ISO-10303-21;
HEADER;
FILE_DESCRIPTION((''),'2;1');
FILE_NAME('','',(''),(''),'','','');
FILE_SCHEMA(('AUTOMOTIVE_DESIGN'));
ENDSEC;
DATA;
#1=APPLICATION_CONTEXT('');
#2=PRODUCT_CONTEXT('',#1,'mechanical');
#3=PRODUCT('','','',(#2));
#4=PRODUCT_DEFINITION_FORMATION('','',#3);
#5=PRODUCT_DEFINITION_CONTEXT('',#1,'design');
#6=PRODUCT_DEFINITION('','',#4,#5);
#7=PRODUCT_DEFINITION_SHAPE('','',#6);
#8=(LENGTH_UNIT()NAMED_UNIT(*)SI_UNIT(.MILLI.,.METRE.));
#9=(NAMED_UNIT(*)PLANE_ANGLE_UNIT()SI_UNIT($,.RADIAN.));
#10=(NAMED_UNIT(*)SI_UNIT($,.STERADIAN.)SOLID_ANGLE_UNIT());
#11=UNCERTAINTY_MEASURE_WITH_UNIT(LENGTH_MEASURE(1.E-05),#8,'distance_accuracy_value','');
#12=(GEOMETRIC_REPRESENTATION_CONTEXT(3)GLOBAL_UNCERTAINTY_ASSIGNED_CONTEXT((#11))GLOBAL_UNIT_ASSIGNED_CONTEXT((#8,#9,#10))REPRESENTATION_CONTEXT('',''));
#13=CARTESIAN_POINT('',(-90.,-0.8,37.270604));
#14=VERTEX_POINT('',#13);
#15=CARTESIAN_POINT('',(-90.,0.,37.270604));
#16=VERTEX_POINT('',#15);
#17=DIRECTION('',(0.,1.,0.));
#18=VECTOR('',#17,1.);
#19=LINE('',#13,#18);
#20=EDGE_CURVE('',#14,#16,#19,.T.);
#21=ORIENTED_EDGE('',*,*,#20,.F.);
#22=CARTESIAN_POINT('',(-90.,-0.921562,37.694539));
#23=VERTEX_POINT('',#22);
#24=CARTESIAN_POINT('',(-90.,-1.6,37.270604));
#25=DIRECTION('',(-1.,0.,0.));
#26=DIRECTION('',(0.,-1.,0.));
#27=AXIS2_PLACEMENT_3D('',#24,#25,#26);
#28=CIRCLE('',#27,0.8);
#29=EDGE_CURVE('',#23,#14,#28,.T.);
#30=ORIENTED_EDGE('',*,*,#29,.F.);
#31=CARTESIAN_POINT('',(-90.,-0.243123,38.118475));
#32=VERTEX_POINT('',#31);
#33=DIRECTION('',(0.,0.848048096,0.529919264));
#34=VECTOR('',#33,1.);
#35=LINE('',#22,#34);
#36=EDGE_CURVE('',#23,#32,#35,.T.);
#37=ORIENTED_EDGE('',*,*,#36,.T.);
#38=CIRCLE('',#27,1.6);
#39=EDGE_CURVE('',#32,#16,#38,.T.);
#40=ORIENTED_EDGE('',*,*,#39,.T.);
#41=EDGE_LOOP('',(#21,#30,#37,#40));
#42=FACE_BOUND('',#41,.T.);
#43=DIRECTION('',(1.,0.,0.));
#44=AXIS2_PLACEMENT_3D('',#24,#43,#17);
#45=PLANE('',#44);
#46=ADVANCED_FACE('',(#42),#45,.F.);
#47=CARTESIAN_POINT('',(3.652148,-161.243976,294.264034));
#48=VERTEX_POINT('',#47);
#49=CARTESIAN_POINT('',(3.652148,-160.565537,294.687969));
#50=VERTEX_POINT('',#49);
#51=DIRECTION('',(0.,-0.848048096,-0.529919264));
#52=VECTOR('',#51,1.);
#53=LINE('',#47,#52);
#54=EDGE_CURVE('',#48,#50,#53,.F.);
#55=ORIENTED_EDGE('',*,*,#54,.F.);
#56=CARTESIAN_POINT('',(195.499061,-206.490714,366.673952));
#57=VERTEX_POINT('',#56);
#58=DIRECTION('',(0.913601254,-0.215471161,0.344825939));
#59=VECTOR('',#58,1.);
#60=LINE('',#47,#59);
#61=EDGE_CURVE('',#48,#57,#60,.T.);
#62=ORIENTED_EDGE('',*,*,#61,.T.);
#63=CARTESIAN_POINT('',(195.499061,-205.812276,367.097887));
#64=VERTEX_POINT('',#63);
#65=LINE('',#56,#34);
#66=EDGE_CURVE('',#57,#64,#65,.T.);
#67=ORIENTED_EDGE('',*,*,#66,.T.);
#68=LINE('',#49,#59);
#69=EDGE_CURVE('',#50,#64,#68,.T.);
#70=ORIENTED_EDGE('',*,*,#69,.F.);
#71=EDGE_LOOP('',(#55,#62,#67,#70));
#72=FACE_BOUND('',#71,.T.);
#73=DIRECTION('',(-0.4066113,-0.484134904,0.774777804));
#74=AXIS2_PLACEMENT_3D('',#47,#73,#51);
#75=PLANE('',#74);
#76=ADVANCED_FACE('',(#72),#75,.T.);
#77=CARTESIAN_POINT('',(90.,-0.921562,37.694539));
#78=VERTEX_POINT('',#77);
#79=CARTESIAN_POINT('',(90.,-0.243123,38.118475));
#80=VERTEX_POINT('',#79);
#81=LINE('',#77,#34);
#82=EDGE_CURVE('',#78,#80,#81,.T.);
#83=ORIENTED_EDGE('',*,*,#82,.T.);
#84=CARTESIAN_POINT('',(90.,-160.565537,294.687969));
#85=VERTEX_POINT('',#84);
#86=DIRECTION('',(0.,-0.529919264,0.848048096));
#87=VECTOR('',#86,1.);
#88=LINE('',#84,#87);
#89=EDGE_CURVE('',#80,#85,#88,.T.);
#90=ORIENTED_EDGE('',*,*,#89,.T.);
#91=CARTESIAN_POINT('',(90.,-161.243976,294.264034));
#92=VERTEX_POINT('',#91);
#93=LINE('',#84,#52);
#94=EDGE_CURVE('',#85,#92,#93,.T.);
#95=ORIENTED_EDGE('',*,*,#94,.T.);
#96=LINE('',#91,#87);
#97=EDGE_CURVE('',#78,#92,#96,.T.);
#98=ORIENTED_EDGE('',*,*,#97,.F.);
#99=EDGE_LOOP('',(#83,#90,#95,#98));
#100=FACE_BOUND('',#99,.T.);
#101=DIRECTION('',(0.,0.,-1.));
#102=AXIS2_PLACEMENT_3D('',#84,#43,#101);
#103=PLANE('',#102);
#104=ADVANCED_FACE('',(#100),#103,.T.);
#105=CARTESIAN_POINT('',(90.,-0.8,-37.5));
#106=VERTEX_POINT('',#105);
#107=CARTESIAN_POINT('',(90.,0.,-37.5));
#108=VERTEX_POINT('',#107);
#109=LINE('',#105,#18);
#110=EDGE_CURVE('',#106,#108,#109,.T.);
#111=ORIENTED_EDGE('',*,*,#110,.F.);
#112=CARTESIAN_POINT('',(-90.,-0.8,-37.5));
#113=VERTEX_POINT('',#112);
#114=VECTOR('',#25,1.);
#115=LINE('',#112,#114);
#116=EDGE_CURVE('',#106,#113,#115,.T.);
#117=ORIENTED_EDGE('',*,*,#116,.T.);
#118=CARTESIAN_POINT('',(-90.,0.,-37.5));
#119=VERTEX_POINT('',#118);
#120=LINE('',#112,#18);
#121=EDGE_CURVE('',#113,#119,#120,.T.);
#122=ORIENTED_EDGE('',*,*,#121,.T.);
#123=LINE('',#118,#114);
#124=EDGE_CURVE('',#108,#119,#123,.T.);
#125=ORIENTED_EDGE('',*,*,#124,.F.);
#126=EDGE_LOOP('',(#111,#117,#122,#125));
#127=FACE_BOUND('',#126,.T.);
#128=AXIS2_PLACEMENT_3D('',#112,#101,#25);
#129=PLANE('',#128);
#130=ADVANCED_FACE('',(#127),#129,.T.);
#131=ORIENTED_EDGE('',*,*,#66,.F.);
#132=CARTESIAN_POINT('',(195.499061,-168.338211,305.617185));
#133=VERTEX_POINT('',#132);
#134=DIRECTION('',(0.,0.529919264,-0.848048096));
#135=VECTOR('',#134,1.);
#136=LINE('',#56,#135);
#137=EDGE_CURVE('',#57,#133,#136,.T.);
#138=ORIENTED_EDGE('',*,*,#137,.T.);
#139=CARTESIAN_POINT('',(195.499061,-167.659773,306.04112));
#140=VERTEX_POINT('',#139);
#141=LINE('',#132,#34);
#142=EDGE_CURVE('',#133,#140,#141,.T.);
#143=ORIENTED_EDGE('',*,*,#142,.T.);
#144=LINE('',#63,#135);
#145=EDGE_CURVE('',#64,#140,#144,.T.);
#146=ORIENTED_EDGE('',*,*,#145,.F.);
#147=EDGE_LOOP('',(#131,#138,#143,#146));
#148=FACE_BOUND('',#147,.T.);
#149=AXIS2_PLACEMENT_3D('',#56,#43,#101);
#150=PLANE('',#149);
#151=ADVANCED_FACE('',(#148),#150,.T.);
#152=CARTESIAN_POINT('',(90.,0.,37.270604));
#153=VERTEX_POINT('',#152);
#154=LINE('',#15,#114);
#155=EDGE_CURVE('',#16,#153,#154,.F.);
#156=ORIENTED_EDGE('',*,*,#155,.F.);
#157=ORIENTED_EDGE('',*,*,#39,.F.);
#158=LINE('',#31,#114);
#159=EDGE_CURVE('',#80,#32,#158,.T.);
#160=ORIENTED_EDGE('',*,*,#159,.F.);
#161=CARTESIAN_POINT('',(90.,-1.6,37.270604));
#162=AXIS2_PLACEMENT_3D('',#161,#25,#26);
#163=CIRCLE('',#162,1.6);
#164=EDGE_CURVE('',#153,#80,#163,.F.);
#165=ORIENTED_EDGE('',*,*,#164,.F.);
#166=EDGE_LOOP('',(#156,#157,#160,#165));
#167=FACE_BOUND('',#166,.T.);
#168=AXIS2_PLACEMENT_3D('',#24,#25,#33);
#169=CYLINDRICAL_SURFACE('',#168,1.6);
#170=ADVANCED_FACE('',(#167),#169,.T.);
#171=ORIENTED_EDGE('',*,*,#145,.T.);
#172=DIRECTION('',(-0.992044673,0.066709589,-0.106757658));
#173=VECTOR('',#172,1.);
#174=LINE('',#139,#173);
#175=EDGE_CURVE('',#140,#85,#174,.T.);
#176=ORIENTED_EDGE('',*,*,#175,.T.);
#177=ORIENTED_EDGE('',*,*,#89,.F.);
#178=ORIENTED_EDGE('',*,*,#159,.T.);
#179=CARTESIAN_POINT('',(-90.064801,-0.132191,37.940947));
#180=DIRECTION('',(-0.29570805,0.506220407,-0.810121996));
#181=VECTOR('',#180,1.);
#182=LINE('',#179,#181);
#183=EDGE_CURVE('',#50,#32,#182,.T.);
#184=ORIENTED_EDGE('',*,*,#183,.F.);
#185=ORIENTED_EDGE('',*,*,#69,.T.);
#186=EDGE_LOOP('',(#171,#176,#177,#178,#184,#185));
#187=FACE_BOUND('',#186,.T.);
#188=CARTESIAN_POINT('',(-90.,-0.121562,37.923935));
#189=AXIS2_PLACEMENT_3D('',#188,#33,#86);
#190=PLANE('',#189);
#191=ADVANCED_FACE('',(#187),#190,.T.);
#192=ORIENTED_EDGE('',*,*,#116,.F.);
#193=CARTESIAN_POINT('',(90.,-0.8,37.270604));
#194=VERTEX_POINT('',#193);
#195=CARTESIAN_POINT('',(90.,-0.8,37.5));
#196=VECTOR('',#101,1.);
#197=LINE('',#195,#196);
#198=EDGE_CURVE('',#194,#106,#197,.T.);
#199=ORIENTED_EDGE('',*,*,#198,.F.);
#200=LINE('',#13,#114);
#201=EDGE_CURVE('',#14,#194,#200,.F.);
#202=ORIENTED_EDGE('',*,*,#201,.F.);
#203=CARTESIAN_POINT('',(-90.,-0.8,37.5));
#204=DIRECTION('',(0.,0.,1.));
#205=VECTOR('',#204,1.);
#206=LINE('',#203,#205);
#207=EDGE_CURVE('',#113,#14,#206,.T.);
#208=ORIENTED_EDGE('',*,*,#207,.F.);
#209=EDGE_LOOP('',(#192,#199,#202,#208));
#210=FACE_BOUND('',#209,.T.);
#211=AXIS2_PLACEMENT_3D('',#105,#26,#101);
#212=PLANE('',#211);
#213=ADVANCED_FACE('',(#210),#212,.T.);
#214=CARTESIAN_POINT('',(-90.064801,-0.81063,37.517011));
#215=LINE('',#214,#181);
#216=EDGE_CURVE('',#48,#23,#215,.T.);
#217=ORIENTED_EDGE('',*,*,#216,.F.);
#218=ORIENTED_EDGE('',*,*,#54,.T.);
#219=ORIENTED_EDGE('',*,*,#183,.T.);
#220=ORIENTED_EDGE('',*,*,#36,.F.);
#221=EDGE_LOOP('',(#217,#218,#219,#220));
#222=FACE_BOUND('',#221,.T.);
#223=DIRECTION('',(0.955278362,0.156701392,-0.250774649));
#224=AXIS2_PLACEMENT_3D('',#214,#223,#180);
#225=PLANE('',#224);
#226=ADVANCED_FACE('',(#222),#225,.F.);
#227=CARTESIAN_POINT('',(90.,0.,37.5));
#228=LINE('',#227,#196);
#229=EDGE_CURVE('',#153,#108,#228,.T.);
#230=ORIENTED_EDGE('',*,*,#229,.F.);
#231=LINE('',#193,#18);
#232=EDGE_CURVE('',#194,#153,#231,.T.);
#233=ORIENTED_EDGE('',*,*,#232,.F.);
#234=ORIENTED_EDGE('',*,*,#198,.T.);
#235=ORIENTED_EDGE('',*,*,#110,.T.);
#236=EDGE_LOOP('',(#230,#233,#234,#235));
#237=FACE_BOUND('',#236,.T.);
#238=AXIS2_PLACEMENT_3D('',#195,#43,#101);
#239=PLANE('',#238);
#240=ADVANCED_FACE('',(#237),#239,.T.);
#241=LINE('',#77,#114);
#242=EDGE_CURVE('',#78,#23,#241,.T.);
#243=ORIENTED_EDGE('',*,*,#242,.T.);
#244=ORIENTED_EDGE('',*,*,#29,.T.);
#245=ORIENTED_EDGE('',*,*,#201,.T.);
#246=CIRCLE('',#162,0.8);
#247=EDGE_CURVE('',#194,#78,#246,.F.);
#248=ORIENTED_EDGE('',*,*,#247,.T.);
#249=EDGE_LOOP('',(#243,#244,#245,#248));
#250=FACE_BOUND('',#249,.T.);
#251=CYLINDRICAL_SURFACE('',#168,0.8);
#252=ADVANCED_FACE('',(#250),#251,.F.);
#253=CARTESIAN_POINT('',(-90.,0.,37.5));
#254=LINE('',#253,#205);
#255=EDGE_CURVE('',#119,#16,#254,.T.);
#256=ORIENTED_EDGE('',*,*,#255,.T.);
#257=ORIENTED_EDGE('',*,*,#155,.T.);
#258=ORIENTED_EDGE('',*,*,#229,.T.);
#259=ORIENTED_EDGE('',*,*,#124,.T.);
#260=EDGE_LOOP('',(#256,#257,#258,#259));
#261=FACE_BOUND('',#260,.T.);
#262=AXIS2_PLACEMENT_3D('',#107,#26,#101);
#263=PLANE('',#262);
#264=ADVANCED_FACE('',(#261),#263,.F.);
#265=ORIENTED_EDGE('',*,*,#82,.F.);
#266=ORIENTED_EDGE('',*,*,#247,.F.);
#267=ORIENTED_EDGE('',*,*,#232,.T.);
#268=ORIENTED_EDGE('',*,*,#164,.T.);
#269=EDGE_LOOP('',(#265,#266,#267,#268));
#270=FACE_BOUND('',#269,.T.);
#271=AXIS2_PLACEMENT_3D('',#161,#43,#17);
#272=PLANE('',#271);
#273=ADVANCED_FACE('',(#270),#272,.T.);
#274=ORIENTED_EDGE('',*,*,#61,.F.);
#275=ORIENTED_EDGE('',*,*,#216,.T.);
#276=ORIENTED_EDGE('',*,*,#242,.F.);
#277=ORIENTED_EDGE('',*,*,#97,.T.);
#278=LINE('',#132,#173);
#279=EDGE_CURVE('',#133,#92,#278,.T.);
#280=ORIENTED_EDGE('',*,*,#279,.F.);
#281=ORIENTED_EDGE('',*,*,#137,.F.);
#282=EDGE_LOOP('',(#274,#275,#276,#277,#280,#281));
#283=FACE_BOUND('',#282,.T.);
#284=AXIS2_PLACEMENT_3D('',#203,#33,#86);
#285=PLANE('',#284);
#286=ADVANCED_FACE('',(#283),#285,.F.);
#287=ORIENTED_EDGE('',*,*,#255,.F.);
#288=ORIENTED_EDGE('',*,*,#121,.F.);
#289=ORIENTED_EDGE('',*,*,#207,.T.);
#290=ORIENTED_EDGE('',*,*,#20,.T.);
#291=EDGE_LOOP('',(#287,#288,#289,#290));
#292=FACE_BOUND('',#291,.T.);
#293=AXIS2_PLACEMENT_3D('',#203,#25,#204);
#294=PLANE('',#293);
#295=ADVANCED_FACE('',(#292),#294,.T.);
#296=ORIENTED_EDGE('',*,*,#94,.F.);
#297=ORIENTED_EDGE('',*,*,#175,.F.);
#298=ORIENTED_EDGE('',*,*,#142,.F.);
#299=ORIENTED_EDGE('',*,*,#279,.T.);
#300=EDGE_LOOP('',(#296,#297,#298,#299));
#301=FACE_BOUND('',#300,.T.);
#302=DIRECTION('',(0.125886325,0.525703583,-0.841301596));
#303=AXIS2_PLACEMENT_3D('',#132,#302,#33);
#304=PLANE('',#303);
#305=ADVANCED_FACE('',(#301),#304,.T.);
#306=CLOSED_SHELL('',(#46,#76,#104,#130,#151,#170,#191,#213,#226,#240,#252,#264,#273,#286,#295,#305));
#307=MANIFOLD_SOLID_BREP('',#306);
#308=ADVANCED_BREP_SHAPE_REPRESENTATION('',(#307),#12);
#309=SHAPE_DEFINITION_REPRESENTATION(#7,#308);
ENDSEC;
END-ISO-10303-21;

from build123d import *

# Parameters (mm, degrees)
SKETCH1_W                    = 180
SKETCH1_H                    = 75
BASE_FLANGE1_DEPTH           = 0.8
EDGE_FLANGE1_STRIP_CUT_DEPTH = 180
EDGE_FLANGE1_DEPTH           = 180
CUT_EXTRUDE1_DEPTH           = 10
TAB1_DEPTH                   = 0.8


# Sheet-metal steps are written as plain solids
with BuildPart() as part:
    # Sketch1 → Base-Flange1 (new body)
    with BuildSketch(Plane(origin=(0, 0, 0), x_dir=(1, 0, 0), z_dir=(0, 1, 0))):
        Rectangle(SKETCH1_W, SKETCH1_H)
    extrude(amount=-BASE_FLANGE1_DEPTH)

    # Edge-Flange1 strip (across the edge) → Edge-Flange1 strip cut (cut)
    with BuildSketch(Plane(origin=(90, -0.8, 37.5), x_dir=(0, -0.8480480961564291, -0.5299192642332), z_dir=(-1, 0, 0))):
        Polygon((-3.100489422, 3.452156347), (-0.556876954, -0.618474514), (0.121561523, -0.194539103), (-2.422050945, 3.876091759), align=None)
    extrude(amount=EDGE_FLANGE1_STRIP_CUT_DEPTH, mode=Mode.SUBTRACT)

    # Edge-Flange1 section (across the edge) → Edge-Flange1 (add)
    with BuildSketch(Plane(origin=(90, -0.8, 37.5), x_dir=(0, -0.8480480961564291, -0.5299192642332), z_dir=(-1, 0, 0))):
        with BuildLine():
            Line((-0.8, 0.229396309), (-0.8, 302.770603691))
            Line((-0.8, 302.770603691), (0, 302.770603691))
            Line((0, 302.770603691), (0, 0.229396309))
            ThreePointArc((0, 0.229396309), (0.030990643, 0.008886424), (0.121561523, -0.194539103))
            Line((0.121561523, -0.194539103), (-0.556876954, -0.618474514))
            ThreePointArc((-0.556876954, -0.618474514), (-0.738018714, -0.211623461), (-0.8, 0.229396309))
        make_face()
    extrude(amount=EDGE_FLANGE1_DEPTH)

    # Sketch5 → Cut-Extrude1 (cut)
    with BuildSketch(Plane(origin=(0, 16.955478386, 10.594958791), x_dir=(1, 0, 0), z_dir=(0, 0.8480480961564291, 0.5299192642332))):
        Polygon((-90, -32.455135326), (11.580249487, -360.607900661), (-238.910363798, -331.986176437), align=None)
    extrude(amount=-CUT_EXTRUDE1_DEPTH, mode=Mode.SUBTRACT)

    # Sketch6 → Tab1 (add)
    with BuildSketch(Plane(origin=(0, 16.955478386, 10.594958791), x_dir=(1, 0, 0), z_dir=(0, 0.8480480961564291, 0.5299192642332001))):
        Polygon((3.65214794, -334.996342709), (195.49906109, -420.380554221), (195.49906109, -348.383732857), (90, -334.996342709), align=None)
    extrude(amount=-TAB1_DEPTH)


solid = part.part
